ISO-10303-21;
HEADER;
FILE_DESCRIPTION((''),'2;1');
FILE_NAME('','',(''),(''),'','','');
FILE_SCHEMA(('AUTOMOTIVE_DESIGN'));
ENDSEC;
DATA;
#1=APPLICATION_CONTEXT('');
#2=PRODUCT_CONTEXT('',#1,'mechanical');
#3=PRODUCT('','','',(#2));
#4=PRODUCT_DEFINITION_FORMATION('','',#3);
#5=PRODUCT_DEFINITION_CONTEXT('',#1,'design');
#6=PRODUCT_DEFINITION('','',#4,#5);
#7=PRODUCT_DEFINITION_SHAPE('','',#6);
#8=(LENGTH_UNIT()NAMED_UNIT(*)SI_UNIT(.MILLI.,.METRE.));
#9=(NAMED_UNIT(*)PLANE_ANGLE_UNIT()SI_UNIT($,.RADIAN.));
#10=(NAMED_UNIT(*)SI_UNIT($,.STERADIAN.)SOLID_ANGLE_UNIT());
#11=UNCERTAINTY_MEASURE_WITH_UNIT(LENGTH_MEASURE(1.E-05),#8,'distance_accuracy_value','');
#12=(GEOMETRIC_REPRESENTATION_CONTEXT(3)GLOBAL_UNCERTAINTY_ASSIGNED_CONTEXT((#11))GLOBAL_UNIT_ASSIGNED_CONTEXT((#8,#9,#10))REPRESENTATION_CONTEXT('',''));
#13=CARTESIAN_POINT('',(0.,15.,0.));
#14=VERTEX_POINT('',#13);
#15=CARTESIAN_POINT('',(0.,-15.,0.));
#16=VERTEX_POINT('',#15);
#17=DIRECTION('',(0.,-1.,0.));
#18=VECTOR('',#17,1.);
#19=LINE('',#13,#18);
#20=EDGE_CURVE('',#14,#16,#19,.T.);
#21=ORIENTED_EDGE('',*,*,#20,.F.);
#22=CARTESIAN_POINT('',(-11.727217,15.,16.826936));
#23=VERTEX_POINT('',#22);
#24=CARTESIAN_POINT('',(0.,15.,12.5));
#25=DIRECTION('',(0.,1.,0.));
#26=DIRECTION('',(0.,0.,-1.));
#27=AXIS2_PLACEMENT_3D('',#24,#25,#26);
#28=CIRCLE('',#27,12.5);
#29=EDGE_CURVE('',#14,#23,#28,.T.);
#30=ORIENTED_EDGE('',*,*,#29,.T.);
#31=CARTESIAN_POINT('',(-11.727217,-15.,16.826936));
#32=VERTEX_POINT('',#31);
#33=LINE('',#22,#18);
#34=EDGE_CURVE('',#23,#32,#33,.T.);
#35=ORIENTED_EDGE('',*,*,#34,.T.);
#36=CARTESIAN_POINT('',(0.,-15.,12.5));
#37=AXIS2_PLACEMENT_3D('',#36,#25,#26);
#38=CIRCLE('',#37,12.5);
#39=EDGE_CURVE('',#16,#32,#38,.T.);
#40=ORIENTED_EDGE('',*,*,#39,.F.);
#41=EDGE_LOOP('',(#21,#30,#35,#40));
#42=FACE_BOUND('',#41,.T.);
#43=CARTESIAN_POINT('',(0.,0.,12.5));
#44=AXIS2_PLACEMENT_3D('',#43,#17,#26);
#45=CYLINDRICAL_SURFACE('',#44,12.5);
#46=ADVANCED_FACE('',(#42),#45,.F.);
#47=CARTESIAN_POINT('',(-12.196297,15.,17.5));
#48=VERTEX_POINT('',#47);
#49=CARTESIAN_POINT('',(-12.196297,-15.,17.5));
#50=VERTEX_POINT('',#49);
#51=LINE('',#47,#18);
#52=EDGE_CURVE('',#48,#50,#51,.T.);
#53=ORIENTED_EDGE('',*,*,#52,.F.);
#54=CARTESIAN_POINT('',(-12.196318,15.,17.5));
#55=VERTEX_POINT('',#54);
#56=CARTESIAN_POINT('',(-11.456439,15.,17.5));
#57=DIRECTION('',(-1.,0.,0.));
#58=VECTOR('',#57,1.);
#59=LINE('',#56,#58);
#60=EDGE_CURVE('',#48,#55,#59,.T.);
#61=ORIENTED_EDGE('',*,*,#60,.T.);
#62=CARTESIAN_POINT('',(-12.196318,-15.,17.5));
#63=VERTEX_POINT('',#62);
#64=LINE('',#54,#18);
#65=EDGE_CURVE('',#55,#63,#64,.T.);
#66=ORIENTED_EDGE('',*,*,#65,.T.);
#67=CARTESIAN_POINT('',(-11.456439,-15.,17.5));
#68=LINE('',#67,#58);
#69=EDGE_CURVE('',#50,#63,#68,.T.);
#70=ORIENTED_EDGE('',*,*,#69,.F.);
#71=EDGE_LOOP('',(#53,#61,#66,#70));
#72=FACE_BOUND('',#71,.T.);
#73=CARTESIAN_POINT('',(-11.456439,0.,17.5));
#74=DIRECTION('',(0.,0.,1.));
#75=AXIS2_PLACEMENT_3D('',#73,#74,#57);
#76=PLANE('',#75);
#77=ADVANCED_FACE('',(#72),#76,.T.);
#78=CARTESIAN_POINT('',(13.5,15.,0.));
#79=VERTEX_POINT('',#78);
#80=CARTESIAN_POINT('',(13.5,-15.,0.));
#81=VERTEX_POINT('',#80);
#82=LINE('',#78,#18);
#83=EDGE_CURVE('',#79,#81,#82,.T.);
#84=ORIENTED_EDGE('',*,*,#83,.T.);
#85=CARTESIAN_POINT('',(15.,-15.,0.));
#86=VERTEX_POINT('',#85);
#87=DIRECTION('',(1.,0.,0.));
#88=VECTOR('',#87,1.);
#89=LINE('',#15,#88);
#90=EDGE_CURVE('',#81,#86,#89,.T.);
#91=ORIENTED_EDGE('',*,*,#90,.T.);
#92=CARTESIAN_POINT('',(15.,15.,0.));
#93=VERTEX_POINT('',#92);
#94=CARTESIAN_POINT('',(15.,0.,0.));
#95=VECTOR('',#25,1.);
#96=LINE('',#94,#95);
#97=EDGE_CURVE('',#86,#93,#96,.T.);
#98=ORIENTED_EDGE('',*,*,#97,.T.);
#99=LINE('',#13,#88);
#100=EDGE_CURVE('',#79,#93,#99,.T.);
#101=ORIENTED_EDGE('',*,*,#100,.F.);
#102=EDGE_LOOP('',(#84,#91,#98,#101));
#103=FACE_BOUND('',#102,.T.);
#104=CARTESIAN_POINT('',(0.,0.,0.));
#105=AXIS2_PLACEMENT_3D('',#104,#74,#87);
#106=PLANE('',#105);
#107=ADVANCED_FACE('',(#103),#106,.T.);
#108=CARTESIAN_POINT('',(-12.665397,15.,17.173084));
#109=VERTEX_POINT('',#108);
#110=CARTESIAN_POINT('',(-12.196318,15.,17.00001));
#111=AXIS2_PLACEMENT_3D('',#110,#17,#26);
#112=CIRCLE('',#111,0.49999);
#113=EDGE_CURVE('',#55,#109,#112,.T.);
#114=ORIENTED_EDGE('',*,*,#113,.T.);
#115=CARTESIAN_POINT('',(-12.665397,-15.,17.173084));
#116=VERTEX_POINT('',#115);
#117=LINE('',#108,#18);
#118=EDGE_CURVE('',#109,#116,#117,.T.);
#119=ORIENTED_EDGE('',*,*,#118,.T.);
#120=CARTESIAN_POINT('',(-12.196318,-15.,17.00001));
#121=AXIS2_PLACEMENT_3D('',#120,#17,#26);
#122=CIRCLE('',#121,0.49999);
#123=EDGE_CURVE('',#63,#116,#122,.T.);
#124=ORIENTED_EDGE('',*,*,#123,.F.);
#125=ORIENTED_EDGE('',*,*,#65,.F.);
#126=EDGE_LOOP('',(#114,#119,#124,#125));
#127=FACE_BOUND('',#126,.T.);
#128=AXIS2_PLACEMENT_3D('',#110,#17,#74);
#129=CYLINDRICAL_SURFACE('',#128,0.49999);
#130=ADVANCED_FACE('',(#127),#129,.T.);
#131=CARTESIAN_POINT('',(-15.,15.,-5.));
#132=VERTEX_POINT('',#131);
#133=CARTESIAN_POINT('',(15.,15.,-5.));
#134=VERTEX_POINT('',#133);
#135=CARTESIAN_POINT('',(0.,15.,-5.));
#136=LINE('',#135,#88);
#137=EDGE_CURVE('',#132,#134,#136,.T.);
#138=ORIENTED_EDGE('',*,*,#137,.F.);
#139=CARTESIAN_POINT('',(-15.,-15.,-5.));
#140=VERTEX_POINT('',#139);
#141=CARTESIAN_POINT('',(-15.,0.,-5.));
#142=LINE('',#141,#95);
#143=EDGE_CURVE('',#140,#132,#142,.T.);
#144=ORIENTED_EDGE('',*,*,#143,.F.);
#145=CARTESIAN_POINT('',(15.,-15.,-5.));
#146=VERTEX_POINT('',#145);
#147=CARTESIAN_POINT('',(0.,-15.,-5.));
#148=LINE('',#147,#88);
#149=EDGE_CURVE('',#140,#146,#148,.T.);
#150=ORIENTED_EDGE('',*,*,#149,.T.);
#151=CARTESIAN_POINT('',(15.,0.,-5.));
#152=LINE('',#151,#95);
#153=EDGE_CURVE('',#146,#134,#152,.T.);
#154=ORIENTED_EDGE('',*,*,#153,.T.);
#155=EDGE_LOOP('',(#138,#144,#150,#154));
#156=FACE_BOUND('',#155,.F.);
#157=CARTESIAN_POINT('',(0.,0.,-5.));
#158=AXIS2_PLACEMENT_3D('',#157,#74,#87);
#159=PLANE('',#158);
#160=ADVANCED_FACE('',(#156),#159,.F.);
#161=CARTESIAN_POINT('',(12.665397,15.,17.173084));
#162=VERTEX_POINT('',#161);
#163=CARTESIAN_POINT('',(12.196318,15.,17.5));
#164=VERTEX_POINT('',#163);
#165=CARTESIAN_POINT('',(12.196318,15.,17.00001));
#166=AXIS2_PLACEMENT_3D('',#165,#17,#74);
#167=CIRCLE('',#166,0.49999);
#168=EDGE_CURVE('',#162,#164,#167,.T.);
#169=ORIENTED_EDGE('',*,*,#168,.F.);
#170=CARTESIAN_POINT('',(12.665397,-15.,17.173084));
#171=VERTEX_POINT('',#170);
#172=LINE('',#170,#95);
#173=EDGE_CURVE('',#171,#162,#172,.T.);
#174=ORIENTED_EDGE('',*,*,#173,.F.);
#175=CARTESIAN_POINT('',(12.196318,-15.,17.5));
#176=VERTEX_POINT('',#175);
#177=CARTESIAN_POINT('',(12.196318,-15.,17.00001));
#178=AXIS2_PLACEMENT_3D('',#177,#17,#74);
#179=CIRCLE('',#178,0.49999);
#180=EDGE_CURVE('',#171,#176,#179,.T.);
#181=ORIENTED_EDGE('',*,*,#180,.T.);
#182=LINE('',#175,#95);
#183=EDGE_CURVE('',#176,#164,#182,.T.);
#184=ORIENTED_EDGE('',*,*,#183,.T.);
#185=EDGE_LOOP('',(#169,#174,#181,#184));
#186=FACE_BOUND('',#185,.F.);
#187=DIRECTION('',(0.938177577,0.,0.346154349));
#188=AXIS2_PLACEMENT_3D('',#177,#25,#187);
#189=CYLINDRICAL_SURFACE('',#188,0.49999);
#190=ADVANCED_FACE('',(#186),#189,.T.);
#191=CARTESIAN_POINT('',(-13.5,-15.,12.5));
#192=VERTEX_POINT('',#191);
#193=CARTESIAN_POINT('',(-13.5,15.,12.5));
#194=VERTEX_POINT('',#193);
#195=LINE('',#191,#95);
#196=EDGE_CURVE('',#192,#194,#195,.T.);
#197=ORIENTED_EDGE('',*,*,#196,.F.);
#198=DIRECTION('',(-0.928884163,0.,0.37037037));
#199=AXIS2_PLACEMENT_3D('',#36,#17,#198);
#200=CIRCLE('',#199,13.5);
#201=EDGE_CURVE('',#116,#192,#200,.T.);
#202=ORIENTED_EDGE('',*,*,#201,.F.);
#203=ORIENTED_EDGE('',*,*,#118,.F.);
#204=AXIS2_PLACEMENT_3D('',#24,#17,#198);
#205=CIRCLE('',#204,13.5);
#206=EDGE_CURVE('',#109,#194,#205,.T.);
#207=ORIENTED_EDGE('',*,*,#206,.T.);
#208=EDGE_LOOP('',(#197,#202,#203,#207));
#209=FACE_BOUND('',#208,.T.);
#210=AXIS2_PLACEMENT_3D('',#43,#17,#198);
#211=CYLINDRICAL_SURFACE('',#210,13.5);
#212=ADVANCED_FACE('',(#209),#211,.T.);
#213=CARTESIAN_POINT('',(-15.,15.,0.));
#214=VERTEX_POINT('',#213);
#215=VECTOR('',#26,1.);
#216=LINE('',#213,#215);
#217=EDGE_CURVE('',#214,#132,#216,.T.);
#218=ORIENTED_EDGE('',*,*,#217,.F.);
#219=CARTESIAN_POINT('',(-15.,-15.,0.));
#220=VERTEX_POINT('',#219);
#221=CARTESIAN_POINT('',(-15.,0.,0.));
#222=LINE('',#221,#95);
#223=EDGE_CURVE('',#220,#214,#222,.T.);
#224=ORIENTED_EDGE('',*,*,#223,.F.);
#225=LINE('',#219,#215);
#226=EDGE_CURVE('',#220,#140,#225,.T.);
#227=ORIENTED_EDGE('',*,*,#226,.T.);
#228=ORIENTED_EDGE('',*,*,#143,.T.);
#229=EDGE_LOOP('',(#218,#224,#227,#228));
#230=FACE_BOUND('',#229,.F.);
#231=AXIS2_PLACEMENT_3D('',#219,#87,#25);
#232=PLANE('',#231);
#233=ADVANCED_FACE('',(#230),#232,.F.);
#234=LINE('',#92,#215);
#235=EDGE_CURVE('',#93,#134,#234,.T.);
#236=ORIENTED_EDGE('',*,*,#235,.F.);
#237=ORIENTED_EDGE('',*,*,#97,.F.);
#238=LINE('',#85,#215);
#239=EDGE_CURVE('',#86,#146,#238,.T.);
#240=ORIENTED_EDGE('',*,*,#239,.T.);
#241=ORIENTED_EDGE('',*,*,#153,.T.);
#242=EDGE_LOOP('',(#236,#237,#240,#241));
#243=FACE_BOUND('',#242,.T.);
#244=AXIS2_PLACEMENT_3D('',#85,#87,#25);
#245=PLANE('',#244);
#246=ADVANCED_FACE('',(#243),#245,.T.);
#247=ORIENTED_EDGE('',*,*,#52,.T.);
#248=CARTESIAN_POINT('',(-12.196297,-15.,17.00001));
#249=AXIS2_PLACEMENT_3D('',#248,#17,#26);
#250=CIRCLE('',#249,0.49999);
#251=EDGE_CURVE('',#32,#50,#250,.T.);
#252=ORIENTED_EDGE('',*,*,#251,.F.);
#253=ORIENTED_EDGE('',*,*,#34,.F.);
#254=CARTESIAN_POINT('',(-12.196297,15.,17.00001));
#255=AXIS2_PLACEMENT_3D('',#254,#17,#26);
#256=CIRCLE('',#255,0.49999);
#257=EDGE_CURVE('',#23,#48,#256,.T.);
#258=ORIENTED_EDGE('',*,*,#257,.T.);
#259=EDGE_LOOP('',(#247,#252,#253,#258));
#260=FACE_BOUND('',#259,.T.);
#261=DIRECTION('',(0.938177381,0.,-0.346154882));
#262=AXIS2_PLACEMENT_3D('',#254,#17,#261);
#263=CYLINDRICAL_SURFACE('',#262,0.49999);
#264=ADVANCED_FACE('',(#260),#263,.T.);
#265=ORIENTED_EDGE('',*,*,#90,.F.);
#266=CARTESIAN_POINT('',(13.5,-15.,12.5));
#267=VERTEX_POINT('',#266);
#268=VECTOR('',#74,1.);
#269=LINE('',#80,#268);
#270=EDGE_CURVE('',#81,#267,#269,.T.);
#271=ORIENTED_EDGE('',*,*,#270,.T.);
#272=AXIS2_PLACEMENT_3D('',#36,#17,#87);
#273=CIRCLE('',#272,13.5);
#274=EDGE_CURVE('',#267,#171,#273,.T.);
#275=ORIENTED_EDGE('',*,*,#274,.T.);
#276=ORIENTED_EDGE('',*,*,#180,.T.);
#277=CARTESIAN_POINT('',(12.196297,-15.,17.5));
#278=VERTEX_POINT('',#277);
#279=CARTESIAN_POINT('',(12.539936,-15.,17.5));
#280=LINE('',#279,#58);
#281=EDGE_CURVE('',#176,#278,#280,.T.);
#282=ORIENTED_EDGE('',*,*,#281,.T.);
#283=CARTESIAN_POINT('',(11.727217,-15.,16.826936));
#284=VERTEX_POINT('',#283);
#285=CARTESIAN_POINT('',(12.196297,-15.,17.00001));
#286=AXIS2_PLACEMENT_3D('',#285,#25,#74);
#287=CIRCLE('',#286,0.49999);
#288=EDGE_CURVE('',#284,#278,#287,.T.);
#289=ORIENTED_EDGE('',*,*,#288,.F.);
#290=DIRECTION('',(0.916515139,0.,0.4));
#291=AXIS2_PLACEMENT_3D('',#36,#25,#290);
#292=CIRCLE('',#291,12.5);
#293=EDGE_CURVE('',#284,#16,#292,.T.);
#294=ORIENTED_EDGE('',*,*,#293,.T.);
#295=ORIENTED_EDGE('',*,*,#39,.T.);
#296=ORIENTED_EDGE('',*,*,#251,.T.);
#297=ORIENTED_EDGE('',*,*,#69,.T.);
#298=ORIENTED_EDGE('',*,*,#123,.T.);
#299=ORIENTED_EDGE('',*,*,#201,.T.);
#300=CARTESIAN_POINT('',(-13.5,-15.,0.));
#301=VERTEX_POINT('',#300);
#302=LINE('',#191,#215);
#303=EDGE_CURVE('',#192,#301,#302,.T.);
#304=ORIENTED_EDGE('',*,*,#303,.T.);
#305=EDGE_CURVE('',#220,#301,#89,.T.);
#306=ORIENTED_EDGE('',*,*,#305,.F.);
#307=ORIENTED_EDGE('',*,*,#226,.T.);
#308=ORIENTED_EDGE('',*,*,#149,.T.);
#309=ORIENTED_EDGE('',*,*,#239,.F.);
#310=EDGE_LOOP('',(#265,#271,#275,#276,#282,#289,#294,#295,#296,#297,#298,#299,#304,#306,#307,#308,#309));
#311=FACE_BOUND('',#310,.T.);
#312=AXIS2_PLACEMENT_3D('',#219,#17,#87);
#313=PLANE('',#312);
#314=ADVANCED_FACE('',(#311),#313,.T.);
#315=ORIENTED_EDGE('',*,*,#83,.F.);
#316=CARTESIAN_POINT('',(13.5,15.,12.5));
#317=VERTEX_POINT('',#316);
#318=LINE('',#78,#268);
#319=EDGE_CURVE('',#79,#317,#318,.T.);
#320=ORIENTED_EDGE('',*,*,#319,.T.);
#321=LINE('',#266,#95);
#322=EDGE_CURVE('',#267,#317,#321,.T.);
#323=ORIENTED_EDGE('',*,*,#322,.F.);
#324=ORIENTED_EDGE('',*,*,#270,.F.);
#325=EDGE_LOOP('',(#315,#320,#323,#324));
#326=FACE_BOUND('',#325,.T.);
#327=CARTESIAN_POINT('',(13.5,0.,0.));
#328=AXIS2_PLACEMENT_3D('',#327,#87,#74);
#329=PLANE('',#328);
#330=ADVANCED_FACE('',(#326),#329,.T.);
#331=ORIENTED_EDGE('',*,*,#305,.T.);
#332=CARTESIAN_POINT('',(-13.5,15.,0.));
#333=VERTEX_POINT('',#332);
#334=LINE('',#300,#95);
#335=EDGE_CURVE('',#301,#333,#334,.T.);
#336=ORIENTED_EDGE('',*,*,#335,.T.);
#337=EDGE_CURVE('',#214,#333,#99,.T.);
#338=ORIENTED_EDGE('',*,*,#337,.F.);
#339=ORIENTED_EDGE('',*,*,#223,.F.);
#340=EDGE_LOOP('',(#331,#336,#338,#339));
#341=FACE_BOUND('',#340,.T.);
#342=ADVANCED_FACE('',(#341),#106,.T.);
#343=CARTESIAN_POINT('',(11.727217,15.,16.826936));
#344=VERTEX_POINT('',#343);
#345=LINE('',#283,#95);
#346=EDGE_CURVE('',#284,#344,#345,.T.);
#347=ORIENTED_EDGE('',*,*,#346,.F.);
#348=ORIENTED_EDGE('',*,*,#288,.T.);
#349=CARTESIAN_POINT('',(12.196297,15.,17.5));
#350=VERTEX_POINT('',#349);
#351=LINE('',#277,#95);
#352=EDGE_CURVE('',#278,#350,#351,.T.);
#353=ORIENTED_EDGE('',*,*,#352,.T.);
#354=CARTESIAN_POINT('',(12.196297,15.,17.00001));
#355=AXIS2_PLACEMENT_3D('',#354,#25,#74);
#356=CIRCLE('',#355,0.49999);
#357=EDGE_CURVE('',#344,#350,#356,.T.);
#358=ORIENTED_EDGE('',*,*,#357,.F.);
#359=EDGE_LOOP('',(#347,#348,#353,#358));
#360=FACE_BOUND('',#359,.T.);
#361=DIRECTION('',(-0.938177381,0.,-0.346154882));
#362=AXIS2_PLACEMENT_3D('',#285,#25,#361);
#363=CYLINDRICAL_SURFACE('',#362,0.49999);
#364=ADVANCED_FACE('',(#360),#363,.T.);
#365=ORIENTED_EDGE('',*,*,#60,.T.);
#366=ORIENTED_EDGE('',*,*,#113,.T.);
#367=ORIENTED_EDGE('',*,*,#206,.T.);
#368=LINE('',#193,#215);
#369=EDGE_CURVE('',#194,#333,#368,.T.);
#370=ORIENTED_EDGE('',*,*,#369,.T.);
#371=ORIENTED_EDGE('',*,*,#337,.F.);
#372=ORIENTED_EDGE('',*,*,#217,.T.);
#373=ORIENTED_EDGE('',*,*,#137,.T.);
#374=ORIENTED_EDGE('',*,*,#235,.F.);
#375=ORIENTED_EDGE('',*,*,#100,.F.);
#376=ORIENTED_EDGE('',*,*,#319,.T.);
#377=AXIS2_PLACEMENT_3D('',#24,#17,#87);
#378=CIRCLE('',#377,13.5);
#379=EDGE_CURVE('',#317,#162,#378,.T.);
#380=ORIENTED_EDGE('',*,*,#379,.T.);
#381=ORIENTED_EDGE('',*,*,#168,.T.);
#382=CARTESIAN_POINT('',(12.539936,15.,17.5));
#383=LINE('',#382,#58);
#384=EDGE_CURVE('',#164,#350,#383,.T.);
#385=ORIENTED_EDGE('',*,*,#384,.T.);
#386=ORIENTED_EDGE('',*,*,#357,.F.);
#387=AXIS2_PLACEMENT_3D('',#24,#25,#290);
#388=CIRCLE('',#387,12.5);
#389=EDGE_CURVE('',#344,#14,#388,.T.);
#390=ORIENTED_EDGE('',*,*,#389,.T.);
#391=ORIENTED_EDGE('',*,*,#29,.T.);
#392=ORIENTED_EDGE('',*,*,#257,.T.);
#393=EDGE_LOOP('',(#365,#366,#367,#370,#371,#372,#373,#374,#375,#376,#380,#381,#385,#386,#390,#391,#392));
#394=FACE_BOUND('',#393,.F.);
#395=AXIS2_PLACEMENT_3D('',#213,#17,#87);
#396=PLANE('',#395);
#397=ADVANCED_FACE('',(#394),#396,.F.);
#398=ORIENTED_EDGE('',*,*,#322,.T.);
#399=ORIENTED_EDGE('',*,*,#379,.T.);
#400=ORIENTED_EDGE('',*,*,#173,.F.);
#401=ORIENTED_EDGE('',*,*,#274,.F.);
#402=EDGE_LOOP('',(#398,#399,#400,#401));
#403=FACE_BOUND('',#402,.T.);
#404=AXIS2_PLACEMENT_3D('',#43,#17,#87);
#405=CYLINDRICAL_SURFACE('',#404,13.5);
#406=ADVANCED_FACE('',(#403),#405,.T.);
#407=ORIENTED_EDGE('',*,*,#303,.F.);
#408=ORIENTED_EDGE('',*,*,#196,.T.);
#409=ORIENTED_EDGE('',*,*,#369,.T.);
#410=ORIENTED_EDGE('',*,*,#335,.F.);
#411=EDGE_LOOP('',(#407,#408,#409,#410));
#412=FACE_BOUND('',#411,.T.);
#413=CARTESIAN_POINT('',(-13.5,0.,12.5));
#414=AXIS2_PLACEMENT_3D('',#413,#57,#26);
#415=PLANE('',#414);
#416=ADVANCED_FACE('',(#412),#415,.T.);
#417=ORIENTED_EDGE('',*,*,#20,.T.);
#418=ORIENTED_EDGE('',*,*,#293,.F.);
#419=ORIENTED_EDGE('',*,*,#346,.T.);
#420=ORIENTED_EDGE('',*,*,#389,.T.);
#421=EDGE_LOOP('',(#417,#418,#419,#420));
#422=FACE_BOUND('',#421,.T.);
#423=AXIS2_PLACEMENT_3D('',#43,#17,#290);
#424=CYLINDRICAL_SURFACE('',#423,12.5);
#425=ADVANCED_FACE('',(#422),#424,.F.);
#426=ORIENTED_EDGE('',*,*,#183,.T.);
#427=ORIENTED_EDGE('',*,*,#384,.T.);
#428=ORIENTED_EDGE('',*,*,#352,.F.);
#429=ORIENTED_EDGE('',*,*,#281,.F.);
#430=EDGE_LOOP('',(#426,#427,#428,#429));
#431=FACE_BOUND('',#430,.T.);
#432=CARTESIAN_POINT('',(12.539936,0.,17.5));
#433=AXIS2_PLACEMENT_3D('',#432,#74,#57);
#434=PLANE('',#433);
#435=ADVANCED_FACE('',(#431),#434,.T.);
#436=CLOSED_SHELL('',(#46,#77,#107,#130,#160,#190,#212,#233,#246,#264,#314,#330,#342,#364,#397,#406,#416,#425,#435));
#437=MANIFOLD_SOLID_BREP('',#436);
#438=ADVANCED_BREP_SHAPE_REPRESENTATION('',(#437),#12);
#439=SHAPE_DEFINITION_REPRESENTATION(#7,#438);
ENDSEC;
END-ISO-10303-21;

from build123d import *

# Parameters (mm, degrees)
F1_W     = 30
F1_H     = 30
F2_DEPTH = 5
F3_DEPTH = 15
F4_R     = 0.49999


# Not quite as in the source:
# - a fillet or chamfer is up to 0.001 mm smaller than in the source, because OpenCascade refuses the exact size


with BuildPart() as f2:
    # F1 (on Top) → F2 (new body)
    with BuildSketch(Plane.XY):
        Rectangle(F1_W, F1_H)
    extrude(amount=-F2_DEPTH)

    # F0 (on Front) → F3 (join, symmetric)
    with BuildSketch(Plane.XZ):
        with BuildLine():
            ThreePointArc((0, 0), (-10.4582503317, 5.6534680312), (-11.4564392374, 17.5))
            Line((-11.4564392374, 17.5), (-12.539936204, 17.5))
            ThreePointArc((-12.539936204, 17.5), (-13.257811636, 15.0456689932), (-13.5, 12.5))
            Line((-13.5, 12.5), (-13.5, 0))
            Line((-13.5, 0), (0, 0))
        make_face()
        with BuildLine():
            ThreePointArc((11.4564392374, 17.5), (10.4582503317, 5.6534680312), (0, 0))
            Line((0, 0), (13.5, 0))
            Line((13.5, 0), (13.5, 12.5))
            ThreePointArc((13.5, 12.5), (13.257811636, 15.0456689932), (12.539936204, 17.5))
            Line((12.539936204, 17.5), (11.4564392374, 17.5))
        make_face()
    extrude(amount=F3_DEPTH, both=True)

    # F4 (radius 0.5 in the source; OpenCascade refuses exactly that, so slightly less here)
    f4_edges = [f2.edges().sort_by_distance(p)[0] for p in [
        (-11.456439, 0, 17.5),
        (12.539936, 0, 17.5),
        (-12.539936, 0, 17.5),
        (11.456439, 0, 17.5),
    ]]
    fillet(f4_edges, radius=F4_R)


solid = f2.part
